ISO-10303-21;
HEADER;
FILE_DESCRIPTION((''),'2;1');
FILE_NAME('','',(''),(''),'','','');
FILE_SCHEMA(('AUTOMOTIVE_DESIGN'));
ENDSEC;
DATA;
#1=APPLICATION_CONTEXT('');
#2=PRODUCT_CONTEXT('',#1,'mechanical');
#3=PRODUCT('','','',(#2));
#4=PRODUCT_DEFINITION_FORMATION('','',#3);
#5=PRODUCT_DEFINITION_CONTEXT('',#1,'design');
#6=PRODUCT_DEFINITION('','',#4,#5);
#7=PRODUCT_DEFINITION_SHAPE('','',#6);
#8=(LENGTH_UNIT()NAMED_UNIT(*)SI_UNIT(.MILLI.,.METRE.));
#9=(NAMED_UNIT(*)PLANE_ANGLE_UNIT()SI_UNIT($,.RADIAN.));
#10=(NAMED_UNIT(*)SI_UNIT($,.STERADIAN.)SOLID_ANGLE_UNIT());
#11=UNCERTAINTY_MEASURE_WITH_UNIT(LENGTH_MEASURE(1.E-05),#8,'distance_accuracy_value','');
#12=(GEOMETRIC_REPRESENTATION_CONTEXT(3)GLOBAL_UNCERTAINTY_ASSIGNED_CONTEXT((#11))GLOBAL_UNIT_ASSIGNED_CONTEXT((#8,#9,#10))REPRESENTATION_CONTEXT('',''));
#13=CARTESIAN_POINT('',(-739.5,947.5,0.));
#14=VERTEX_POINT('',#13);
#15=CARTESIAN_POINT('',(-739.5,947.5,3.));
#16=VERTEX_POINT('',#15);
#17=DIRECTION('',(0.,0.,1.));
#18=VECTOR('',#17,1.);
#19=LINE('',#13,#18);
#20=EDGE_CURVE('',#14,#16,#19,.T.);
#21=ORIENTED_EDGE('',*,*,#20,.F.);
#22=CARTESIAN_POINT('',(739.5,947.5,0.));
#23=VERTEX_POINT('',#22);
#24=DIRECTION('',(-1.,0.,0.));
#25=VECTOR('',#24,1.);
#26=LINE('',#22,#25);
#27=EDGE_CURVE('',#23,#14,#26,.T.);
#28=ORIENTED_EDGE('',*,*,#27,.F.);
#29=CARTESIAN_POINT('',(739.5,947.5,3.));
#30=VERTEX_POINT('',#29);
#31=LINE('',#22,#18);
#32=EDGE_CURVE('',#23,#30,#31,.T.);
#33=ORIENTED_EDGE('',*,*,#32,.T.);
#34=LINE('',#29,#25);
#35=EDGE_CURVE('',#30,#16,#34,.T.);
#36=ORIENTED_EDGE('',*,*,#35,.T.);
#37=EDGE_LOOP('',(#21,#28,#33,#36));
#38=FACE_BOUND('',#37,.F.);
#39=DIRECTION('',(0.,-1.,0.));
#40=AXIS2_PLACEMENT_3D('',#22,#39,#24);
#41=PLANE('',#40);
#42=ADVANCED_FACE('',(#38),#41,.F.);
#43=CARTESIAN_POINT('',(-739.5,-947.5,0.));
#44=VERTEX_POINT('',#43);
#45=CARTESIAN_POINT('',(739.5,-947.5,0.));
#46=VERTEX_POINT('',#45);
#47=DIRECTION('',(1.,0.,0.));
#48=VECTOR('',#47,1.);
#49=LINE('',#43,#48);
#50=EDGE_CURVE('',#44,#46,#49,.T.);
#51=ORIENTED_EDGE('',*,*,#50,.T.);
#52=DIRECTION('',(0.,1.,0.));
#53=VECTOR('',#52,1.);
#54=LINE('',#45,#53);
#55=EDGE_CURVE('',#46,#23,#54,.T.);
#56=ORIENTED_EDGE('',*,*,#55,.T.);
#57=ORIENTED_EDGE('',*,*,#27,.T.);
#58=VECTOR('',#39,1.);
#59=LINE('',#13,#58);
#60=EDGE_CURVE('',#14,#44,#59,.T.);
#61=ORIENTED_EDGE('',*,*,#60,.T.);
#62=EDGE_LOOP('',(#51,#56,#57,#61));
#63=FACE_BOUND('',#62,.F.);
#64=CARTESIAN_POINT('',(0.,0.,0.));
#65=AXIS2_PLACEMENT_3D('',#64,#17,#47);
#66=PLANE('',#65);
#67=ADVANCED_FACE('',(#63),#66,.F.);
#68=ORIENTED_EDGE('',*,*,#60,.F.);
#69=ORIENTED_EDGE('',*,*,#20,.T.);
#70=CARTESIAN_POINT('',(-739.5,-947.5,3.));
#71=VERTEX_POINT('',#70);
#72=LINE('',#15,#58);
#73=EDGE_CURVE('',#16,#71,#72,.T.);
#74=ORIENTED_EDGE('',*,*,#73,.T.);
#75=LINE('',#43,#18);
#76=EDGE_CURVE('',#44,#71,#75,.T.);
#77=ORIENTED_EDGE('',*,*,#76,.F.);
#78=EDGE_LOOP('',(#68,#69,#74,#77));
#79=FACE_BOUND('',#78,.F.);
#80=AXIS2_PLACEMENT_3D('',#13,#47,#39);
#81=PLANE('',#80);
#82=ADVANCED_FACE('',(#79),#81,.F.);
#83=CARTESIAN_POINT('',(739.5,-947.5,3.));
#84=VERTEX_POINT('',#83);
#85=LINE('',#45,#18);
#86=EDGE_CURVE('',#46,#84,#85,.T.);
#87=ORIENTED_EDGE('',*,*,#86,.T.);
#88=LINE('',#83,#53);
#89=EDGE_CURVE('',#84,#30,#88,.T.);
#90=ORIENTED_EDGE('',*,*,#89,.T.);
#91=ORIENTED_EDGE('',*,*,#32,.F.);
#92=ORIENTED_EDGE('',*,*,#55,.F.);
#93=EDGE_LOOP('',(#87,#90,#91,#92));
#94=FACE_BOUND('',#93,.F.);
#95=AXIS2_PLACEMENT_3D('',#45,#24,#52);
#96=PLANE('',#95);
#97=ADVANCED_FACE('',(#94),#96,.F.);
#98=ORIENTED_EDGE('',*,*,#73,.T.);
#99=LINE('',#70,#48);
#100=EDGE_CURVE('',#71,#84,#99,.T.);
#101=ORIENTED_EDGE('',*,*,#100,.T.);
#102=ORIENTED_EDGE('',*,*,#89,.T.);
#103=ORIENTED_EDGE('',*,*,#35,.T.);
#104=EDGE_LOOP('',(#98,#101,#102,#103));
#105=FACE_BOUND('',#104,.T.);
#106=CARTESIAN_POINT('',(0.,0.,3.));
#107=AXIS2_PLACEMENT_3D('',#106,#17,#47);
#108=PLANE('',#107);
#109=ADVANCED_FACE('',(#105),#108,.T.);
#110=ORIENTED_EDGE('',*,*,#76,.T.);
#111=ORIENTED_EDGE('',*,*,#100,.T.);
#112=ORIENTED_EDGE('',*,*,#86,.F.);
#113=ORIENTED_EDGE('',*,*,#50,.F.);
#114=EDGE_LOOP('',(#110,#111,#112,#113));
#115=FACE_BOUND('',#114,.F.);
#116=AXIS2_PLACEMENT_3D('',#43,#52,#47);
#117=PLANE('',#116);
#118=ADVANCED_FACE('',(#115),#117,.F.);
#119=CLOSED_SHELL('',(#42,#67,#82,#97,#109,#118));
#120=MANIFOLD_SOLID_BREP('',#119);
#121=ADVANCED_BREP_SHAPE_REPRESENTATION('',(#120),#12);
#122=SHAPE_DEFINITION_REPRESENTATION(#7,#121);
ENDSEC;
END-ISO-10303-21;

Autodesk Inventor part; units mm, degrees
ref_plane "YZ Plane" through (0, 0, 0) normal (1, 0, 0) x (0, 1, 0)
ref_plane "XZ Plane" through (0, 0, 0) normal (0, 1, 0) x (-1, 0, 0)
ref_plane "XY Plane" through (0, 0, 0) normal (0, 0, 1) x (1, 0, 0)
sketch "Sketch6" plane through (0, 0, 0) normal (0, 0, 1) x (1, 0, 0)
  line L0 (739.5, 947.5) -> (-739.5, 947.5)
  line L1 (-739.5, 947.5) -> (-739.5, -947.5)
  line L2 (-739.5, -947.5) -> (739.5, -947.5)
  line L3 (739.5, -947.5) -> (739.5, 947.5)
  line L4 (739.5, 947.5) -> (-739.5, -947.5) construction
  line L5 (-739.5, 947.5) -> (739.5, -947.5) construction
  point P0 (0, 0)
  dimension "d40" = 1479
  dimension "d41" = 1895
extrude "Plate5" add sketch "Sketch6" along normal blind 3
sketch "Sketch7" plane through (0, 0, 0) normal (0, 0, -1) x (-1, 0, 0)
  line L0 (-714.5, 922.5) -> (-514.5, 922.5) construction
  line L1 (-514.5, 922.5) -> (-514.5, 907.5) construction
  line L2 (-514.5, 907.5) -> (-714.5, 907.5) construction
  line L3 (-714.5, 907.5) -> (-714.5, 922.5) construction
  line L4 (-739.5, 947.5) -> (739.5, 947.5) projected
  line L5 (-739.5, -947.5) -> (-739.5, 947.5) projected
  point P0 (0, 0)
  dimension "d43" = 200
  dimension "d44" = 15
  dimension "d45" = 25
  dimension "d46" = 25
mark "Mark1"
equation "\"d42\" = Thickness"
equation "\"BendReliefWidth\" = Thickness"
equation "\"BendReliefDepth\" = 0.5 * Thickness"
equation "\"CornerReliefSize\" = 4 * Thickness"
equation "\"MinimumRemnant\" = 2 * Thickness"
equation "\"TransitionRadius\" = BendRadius"
equation "\"JacobiRadiusSize\" = BendRadius"
equation "\"GapSize\" = Thickness"
equation "\"Thickness\" = 3"
equation "\"BendRadius\" = 5"
properties part number "BSH 045 back" material "09g2s"
